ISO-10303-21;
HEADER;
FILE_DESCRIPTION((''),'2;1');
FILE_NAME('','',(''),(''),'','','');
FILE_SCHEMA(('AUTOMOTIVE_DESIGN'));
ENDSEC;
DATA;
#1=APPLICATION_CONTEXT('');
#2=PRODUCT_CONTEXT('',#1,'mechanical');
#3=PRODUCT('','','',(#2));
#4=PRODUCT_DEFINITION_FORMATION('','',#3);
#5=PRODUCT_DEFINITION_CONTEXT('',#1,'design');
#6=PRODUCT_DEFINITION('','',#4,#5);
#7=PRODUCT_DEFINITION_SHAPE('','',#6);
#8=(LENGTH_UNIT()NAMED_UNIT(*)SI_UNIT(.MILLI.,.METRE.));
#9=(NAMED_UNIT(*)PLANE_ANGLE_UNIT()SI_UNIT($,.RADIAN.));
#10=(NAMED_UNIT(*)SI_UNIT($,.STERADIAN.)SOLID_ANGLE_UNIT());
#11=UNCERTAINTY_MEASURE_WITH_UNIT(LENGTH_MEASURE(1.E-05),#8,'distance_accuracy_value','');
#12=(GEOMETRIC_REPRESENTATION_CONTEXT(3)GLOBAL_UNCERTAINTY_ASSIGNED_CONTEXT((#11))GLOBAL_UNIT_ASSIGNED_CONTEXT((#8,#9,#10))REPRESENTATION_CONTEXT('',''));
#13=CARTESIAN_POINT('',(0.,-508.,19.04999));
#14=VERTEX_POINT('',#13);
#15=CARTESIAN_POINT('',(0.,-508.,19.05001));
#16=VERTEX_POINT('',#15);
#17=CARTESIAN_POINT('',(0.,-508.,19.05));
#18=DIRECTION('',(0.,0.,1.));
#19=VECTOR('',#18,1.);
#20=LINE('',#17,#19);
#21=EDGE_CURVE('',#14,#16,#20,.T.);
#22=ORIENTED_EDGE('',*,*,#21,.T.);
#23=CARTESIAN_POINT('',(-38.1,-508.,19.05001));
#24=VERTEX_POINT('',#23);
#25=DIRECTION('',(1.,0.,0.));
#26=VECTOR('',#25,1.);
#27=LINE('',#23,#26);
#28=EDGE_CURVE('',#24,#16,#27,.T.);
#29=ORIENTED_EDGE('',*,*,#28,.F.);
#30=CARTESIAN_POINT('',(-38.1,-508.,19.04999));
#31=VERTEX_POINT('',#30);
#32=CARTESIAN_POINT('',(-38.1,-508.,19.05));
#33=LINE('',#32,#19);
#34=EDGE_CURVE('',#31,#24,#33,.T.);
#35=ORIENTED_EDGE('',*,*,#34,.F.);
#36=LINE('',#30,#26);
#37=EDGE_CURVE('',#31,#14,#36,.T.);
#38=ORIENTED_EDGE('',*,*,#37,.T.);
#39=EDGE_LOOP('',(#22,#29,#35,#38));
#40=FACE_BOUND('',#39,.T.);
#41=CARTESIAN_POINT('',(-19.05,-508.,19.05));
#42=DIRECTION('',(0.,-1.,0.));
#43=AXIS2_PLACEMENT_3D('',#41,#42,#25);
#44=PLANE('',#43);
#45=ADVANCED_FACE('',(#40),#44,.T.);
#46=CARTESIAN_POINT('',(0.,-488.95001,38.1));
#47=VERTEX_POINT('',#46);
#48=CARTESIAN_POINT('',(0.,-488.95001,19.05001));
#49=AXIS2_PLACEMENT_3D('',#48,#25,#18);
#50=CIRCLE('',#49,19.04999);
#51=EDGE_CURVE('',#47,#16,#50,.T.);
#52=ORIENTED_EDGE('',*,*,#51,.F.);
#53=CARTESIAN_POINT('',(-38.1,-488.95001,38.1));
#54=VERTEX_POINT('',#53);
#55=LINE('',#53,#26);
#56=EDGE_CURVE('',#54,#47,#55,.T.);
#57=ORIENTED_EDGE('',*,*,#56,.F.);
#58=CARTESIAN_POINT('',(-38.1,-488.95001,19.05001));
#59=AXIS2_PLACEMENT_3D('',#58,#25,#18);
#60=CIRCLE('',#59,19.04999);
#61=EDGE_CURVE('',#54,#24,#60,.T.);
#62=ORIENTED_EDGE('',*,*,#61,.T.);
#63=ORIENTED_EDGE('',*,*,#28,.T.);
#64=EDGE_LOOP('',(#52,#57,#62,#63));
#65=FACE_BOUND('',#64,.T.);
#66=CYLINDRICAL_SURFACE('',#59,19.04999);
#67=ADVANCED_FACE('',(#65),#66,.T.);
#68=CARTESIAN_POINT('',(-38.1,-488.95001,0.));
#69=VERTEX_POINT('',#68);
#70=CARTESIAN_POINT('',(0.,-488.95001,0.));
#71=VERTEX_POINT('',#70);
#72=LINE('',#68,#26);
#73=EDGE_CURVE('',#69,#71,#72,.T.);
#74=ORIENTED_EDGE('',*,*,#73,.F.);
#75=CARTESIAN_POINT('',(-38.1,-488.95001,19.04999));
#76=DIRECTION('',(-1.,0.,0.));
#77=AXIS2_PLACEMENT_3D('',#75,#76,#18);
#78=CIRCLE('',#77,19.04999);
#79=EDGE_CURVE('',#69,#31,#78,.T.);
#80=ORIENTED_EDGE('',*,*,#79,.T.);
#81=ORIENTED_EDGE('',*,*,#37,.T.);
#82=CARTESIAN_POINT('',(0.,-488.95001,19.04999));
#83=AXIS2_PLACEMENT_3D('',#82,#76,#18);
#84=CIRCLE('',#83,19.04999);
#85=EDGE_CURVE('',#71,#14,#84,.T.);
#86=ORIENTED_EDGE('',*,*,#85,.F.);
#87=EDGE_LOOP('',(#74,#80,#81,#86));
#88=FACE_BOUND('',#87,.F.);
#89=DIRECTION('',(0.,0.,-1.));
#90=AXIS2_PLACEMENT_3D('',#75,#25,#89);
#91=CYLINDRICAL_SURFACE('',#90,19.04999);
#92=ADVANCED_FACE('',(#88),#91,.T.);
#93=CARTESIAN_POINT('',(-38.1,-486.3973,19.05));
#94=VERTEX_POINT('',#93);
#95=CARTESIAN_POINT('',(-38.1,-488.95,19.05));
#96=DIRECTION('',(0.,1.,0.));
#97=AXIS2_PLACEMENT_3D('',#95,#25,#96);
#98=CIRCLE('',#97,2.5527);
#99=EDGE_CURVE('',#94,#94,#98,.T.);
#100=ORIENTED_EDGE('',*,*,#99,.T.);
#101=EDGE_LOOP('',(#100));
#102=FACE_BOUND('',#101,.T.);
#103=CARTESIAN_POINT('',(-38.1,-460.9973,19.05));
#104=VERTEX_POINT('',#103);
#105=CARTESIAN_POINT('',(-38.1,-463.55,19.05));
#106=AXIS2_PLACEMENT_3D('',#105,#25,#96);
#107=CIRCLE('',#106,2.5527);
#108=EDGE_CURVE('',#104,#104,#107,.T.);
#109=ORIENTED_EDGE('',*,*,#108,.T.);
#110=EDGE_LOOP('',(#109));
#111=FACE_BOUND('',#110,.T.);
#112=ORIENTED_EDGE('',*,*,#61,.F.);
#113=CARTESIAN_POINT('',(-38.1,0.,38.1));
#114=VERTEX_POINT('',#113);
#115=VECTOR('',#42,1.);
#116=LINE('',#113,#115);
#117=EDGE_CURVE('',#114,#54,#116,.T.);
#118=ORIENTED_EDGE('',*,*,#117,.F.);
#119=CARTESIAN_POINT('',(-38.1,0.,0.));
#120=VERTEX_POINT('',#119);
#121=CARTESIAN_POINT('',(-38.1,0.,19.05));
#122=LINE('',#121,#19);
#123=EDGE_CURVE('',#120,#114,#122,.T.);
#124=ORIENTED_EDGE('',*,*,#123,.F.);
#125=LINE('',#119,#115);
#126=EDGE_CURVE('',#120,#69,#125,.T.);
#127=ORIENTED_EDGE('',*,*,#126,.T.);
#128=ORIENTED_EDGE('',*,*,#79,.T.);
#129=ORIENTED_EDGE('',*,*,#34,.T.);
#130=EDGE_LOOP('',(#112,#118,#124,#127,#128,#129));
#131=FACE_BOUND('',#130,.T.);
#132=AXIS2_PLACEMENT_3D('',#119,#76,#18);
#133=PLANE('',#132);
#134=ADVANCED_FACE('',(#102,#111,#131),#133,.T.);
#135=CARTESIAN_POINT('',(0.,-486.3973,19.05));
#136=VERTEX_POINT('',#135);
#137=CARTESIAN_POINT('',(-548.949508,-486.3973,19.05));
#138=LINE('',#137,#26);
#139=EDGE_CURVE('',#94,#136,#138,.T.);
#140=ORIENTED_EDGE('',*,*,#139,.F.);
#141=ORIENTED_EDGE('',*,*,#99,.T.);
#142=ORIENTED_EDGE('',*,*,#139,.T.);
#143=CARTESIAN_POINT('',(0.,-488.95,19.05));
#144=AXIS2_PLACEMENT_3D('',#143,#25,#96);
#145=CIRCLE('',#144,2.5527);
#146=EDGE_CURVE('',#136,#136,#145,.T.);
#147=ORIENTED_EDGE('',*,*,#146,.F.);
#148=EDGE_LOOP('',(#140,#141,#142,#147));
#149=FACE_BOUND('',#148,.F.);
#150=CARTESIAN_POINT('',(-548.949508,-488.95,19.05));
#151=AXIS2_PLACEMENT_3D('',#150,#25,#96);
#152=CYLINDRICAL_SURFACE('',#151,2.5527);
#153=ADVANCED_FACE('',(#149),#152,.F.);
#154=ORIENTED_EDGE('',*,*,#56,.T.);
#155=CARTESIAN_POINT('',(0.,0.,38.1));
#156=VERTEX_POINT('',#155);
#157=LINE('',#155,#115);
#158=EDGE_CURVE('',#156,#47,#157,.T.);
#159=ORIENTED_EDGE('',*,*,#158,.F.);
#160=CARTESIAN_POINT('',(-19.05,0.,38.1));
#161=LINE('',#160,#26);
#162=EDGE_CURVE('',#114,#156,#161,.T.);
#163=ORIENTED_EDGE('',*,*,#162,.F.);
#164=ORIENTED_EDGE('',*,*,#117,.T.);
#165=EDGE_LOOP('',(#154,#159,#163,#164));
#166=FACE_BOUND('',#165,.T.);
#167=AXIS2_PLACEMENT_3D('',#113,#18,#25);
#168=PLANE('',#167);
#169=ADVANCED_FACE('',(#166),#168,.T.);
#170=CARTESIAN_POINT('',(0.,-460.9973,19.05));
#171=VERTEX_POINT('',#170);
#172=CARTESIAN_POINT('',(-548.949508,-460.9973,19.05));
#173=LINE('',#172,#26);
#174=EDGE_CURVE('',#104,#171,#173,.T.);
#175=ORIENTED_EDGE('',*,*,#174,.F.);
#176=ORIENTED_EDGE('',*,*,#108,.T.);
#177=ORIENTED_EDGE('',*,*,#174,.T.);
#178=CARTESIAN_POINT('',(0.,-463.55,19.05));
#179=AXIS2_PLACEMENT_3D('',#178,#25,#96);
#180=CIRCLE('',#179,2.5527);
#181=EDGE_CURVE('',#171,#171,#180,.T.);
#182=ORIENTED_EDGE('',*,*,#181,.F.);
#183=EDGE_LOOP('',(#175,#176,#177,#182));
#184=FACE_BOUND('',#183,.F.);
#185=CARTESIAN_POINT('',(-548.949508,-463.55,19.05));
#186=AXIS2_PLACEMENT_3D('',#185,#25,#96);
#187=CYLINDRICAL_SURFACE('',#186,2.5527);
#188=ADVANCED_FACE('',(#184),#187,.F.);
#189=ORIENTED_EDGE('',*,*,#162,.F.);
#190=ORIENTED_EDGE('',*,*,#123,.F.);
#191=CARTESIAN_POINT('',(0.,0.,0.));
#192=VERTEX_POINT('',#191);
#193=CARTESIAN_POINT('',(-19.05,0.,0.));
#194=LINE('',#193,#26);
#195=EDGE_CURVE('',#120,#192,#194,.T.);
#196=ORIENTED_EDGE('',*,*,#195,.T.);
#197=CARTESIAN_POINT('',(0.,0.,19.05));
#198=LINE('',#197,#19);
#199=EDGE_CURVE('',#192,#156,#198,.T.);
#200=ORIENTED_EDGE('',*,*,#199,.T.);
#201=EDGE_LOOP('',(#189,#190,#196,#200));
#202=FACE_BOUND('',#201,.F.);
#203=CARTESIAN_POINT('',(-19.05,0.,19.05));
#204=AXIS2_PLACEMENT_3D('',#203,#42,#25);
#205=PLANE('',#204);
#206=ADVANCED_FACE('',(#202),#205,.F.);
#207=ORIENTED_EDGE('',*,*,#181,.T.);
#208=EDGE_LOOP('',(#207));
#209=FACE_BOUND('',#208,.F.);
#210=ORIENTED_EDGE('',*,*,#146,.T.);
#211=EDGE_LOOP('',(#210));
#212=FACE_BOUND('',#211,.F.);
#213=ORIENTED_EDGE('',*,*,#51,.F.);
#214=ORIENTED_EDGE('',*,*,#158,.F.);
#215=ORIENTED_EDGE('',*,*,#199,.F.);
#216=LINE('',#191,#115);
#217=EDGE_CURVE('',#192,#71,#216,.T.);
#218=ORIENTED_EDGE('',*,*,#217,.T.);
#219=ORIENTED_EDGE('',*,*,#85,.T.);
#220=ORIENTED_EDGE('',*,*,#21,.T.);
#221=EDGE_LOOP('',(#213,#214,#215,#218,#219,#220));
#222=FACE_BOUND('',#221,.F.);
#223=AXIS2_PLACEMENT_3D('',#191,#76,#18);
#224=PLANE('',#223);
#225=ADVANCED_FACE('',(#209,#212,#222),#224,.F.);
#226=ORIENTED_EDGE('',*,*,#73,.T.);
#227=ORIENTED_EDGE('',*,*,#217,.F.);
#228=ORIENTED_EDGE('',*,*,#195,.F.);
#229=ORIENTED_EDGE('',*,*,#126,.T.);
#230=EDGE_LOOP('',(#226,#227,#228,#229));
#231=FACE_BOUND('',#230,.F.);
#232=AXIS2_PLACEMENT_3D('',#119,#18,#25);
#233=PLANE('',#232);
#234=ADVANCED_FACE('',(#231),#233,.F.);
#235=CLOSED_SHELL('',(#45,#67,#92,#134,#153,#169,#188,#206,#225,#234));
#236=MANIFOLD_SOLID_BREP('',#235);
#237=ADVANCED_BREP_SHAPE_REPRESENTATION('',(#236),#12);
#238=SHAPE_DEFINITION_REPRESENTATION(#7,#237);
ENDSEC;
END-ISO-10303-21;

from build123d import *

# Parameters (mm, degrees)
F0_W     = 38.1
F0_H     = 38.1
F1_DEPTH = 508
F2_R     = 19.04999
F4_D     = 5.1054


# Not quite as in the source:
# - a fillet or chamfer is up to 0.001 mm smaller than in the source, because OpenCascade refuses the exact size


with BuildPart() as f1:
    # F0 (on Front) → F1 (new body)
    with BuildSketch(Plane.XZ):
        with Locations((-19.05, 19.05)):
            Rectangle(F0_W, F0_H)
    extrude(amount=F1_DEPTH)

    # F2 (radius 19.05 in the source; OpenCascade refuses exactly that, so slightly less here)
    f2_edges = [f1.edges().sort_by_distance(p)[0] for p in [
        (-19.05, -508, 38.1),
        (-19.05, -508, 0),
    ]]
    fillet(f2_edges, radius=F2_R)

    # F4 (through all)
    with Locations(Plane(origin=(-38.1, 0, 0), x_dir=(0, -1, 0), z_dir=(-1, 0, 0))):
        with Locations((488.95, 19.05), (463.55, 19.05)):
            Hole(F4_D / 2)


solid = f1.part
